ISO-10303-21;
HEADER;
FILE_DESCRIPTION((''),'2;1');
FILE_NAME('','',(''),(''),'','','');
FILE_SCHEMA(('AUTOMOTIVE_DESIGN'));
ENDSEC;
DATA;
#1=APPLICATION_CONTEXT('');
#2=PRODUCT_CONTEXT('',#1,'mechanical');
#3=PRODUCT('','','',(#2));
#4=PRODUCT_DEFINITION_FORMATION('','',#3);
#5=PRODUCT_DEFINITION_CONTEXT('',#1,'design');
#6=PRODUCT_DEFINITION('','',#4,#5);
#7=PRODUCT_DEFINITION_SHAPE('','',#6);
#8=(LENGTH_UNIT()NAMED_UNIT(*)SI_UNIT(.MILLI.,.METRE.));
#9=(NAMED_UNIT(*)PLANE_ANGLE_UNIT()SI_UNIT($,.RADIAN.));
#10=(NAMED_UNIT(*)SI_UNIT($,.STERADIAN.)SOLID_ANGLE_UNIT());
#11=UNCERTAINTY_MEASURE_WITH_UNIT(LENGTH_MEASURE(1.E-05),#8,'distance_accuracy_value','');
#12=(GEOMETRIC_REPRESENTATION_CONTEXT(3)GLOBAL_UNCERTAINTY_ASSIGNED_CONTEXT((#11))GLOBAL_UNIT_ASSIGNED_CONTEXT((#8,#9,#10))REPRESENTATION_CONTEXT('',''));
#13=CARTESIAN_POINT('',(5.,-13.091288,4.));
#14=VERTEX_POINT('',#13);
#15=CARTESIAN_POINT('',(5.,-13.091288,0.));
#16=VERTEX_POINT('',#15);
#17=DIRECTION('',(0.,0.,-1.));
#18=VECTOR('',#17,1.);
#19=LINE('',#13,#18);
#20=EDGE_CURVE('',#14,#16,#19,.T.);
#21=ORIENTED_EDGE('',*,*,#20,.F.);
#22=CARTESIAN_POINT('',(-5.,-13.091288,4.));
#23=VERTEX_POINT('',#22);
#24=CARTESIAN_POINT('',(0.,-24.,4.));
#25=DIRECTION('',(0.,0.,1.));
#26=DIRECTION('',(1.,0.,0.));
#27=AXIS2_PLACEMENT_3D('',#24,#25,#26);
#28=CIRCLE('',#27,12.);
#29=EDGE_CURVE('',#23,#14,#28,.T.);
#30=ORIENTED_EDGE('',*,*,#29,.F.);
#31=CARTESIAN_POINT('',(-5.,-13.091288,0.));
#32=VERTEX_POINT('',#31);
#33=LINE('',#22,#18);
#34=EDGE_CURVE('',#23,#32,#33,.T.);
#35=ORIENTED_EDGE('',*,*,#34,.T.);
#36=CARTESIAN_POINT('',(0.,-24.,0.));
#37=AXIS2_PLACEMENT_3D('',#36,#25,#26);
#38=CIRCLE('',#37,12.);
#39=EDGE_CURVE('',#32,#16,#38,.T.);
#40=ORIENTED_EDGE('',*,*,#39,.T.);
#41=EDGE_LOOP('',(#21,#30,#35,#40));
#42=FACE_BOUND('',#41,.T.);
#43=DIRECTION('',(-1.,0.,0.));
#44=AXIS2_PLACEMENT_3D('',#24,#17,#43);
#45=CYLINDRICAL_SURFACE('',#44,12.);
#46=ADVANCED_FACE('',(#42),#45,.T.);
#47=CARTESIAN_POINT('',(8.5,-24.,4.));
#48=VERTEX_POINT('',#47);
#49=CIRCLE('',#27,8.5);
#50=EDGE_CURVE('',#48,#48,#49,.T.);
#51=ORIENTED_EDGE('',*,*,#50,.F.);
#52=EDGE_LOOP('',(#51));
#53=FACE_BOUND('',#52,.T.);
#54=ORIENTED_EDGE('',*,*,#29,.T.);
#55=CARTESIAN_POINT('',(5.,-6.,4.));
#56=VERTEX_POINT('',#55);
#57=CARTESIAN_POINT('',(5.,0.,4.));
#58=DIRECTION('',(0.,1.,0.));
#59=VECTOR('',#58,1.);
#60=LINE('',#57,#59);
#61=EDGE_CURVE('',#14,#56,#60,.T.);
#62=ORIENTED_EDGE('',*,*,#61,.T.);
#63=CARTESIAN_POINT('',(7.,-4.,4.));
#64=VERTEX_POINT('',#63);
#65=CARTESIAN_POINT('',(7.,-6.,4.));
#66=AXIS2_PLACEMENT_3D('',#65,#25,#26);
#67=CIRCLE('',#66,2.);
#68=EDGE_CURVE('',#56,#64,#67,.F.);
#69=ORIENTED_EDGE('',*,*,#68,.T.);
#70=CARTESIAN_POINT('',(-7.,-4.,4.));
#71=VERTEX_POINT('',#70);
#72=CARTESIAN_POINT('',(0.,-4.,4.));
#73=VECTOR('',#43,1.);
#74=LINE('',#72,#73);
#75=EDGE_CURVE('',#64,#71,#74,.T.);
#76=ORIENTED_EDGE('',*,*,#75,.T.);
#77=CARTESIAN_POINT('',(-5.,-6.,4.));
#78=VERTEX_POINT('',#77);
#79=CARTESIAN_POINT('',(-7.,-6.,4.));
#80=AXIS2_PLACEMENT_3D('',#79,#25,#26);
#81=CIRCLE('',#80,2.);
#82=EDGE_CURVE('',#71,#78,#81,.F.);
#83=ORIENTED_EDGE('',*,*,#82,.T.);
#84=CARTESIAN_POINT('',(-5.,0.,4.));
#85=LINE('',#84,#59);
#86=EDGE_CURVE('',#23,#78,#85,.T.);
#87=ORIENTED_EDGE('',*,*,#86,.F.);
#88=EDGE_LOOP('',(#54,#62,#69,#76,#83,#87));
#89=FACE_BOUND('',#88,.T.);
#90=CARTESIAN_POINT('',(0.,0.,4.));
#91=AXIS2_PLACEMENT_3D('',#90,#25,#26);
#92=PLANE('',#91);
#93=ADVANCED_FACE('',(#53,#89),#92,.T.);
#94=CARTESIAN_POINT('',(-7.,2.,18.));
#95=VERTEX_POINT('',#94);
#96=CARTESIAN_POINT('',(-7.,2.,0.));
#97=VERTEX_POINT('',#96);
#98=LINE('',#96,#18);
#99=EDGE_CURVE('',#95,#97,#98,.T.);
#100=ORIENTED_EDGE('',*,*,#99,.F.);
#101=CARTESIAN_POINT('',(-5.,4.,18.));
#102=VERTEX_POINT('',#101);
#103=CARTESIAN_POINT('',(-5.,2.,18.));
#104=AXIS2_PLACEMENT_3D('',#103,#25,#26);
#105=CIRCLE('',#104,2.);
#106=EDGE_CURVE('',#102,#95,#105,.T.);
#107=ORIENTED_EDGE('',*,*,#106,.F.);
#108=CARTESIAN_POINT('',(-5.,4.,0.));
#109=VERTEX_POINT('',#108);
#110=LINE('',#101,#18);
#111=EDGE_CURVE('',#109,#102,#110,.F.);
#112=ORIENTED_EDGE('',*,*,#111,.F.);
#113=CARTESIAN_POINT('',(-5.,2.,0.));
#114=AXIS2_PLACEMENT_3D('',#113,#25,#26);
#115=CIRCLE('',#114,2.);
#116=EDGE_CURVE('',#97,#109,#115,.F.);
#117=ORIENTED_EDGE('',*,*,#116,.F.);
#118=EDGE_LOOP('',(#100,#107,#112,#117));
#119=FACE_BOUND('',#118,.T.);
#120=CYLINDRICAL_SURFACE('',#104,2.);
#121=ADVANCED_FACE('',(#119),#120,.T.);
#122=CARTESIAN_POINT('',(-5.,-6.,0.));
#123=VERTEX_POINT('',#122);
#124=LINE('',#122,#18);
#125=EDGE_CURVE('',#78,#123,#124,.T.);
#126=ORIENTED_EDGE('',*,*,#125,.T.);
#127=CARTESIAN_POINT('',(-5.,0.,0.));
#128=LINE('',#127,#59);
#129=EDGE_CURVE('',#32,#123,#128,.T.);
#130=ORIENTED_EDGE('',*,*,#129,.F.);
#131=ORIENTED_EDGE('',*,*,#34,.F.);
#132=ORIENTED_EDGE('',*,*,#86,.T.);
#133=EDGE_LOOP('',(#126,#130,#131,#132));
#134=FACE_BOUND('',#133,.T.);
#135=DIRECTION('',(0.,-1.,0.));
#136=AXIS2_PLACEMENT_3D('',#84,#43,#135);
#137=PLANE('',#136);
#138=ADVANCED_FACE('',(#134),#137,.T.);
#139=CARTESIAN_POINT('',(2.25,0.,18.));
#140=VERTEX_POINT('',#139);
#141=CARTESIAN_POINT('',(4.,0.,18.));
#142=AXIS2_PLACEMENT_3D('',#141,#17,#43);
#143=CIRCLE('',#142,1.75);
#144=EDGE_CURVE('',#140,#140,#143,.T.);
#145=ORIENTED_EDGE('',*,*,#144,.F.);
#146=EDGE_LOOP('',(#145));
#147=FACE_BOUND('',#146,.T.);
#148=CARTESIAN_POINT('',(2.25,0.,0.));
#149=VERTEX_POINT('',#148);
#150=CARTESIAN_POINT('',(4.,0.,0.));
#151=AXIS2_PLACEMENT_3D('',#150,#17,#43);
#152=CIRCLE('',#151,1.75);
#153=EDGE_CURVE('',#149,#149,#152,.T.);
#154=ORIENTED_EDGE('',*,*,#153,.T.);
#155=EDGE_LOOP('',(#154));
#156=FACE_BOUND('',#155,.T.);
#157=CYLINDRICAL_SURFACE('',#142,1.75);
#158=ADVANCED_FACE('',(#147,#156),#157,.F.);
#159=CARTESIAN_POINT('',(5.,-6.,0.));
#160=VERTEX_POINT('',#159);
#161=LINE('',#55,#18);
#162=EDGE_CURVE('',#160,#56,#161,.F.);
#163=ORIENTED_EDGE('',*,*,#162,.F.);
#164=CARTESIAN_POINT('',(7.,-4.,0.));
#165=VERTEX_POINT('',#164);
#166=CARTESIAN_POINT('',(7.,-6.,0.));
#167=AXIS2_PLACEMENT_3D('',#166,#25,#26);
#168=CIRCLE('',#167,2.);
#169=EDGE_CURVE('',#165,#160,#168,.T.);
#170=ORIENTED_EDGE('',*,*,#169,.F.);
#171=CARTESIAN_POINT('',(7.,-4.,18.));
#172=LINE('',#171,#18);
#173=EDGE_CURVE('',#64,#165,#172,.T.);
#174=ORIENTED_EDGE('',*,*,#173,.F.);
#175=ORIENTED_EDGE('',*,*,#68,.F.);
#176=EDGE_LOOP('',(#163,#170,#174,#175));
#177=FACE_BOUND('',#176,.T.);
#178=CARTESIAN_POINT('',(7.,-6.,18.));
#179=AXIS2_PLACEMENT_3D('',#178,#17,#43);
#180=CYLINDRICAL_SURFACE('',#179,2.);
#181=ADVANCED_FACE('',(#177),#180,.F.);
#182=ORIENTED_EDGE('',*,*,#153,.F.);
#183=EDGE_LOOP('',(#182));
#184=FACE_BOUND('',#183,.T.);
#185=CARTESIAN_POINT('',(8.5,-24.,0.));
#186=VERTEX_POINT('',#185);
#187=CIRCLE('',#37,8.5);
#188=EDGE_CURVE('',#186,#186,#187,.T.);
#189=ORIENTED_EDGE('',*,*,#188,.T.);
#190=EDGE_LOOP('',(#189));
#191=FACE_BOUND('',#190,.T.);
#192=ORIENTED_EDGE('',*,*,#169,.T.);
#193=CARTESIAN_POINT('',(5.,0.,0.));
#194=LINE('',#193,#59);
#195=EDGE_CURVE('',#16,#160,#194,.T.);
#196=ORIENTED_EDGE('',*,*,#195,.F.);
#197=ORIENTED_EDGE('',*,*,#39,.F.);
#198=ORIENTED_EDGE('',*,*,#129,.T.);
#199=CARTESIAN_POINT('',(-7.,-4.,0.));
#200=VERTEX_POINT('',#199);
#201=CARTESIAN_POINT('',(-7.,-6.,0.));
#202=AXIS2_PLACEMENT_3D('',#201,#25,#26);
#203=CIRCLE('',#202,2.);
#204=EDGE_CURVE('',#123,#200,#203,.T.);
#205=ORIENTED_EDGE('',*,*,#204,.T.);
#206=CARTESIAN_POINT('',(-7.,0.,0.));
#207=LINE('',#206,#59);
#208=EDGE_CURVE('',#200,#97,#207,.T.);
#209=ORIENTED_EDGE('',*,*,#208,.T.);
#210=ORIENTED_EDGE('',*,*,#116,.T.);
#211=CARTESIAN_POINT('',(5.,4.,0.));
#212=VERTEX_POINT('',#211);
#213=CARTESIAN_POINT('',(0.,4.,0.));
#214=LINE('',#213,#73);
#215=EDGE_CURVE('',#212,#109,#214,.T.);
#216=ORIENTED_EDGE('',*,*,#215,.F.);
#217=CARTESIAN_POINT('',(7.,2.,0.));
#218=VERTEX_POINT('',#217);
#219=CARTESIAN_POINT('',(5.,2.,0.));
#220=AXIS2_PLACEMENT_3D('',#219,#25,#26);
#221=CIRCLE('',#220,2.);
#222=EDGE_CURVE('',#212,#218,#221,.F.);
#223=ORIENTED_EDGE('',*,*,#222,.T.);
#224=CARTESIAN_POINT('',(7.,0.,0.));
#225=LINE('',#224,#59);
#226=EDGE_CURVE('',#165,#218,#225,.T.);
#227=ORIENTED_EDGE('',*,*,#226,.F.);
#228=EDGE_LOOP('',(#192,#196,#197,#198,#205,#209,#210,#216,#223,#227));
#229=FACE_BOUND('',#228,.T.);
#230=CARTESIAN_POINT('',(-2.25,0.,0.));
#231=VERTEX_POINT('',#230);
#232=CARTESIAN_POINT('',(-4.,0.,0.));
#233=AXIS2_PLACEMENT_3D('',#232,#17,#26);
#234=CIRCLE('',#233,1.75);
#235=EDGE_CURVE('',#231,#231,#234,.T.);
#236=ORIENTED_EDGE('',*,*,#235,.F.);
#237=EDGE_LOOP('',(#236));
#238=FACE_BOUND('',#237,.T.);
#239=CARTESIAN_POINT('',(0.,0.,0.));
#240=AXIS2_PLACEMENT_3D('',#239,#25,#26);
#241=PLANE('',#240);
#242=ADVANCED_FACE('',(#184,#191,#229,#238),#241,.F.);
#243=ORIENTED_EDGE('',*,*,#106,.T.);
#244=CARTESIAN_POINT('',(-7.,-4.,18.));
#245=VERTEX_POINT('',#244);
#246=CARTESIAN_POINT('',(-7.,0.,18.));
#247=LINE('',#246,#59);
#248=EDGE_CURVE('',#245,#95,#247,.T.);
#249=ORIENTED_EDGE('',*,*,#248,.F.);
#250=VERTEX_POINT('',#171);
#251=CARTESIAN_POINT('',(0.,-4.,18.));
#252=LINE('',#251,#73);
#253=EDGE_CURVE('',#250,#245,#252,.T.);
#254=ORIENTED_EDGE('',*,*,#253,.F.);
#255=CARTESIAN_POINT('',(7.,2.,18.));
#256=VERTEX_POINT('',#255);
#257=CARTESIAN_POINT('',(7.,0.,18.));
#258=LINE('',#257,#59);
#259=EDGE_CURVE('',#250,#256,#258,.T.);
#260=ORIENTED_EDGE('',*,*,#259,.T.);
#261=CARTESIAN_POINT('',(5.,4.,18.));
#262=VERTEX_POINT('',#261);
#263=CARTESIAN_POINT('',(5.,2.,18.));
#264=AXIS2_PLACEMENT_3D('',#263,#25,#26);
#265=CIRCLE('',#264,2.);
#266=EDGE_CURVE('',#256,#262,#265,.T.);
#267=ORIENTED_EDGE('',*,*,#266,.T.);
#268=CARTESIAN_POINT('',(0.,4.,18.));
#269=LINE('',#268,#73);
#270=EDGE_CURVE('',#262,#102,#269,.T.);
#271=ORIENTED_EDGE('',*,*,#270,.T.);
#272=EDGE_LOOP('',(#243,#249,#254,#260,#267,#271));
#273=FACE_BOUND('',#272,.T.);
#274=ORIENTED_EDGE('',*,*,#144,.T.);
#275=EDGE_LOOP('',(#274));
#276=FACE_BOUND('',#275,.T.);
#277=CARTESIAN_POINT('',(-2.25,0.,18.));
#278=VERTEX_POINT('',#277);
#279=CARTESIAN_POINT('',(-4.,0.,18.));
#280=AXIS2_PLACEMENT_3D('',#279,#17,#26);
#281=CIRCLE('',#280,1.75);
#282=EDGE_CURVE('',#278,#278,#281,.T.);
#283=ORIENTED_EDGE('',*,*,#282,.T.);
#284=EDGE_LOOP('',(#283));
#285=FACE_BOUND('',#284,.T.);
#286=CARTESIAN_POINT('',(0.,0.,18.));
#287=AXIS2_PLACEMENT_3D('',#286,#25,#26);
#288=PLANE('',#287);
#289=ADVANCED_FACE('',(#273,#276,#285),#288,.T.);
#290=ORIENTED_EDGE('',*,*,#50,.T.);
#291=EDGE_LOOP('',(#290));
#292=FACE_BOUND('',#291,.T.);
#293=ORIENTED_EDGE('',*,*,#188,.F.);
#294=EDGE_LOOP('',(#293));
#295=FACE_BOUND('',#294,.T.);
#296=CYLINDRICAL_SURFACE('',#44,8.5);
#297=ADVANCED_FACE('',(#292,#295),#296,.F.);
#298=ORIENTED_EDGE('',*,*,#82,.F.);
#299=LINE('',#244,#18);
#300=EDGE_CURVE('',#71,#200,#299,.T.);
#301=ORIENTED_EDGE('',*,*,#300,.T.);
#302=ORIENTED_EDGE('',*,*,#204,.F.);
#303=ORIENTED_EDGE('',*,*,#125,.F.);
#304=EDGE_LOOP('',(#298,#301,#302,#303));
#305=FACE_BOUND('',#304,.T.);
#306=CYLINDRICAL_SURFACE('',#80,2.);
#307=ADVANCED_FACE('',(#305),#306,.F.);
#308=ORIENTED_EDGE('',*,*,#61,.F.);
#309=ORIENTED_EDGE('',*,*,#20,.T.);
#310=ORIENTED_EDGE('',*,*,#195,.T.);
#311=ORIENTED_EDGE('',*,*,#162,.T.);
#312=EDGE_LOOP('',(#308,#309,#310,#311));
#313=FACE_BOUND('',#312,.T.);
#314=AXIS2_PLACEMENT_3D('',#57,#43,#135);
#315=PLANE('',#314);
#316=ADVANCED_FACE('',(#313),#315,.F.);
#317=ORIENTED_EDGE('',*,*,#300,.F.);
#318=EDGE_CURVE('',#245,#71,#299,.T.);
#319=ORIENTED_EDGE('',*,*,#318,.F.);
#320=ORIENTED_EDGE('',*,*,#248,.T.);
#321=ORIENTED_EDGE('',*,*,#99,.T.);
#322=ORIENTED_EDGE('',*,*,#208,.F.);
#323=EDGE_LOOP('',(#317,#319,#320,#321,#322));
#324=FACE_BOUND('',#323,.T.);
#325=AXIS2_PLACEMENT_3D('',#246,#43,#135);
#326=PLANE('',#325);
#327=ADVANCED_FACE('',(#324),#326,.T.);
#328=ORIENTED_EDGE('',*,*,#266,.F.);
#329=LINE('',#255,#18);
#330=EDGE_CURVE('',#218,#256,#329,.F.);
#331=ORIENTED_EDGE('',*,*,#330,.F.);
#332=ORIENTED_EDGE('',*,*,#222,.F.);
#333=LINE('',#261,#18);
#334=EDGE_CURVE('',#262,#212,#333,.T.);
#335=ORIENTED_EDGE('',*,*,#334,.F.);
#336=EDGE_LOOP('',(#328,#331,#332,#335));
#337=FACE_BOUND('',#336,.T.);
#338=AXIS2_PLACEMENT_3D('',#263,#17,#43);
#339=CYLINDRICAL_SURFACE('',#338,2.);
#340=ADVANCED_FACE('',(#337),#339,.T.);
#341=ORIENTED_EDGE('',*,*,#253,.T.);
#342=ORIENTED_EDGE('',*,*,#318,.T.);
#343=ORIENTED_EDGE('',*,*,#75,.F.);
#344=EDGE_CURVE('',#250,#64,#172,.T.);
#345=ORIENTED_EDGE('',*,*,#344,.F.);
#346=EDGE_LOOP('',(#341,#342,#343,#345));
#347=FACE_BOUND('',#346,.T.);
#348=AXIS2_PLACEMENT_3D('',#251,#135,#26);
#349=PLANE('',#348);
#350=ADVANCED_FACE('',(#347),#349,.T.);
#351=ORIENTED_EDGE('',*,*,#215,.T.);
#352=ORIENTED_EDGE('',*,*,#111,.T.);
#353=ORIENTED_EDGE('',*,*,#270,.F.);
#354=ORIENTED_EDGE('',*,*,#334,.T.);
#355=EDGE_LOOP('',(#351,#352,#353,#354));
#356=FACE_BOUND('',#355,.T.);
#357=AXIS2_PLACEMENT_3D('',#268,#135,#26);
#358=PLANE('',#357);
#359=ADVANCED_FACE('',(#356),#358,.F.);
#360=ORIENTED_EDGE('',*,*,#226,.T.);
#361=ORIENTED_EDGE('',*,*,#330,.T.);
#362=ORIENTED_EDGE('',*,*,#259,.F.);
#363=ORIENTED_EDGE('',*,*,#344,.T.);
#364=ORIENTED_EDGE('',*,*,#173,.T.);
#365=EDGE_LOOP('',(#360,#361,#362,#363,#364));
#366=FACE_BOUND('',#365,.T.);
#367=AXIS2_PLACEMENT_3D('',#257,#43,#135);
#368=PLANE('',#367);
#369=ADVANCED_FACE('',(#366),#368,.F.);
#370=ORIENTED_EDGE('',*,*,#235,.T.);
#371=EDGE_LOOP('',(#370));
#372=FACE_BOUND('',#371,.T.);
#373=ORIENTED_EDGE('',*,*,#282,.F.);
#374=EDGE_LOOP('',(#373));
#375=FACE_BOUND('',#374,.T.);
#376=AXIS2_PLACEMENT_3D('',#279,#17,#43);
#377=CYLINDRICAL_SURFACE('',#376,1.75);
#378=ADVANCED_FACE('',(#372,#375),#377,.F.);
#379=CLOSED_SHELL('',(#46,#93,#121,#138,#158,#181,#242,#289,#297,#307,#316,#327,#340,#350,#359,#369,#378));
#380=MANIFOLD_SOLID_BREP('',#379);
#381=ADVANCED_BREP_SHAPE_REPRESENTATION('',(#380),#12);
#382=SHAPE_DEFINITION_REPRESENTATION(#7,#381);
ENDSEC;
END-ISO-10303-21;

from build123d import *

# Parameters (mm, degrees)
SKETCH_1_W          = 14
SKETCH_1_H          = 8
EXTRUDE_1_DEPTH     = 18
SKETCH_1_3_R        = 8.5
EXTRUDE_2_DEPTH     = 4
FILLET_1_R          = 2
CUT_EXTRUDE_START   = -18
SKETCH_5_R          = 1.75
CUT_EXTRUDE_1_DEPTH = 18
FILLET_3_R          = 2


with BuildPart() as part:
    # 草图1 → 凸台-拉伸1 (new body)
    with BuildSketch(Plane.XY):
        Rectangle(SKETCH_1_W, SKETCH_1_H)
    extrude(amount=EXTRUDE_1_DEPTH)

    # 草图1<3> → 凸台-拉伸2 (add)
    with BuildSketch(Plane.XY):
        with BuildLine():
            Line((5, -13.091287885), (5, -4))
            Line((5, -4), (-5, -4))
            Line((-5, -4), (-5, -13.091287885))
            ThreePointArc((-5, -13.091287885), (0, -36), (5, -13.091287885))
        make_face()
        with Locations((0, -24)):
            Circle(SKETCH_1_3_R, mode=Mode.SUBTRACT)
    extrude(amount=EXTRUDE_2_DEPTH)

    # 圆角1
    fillet_1_edges = [part.edges().sort_by_distance(p)[0] for p in [
        (-5, -4, 2),
        (5, -4, 2),
    ]]
    fillet(fillet_1_edges, radius=FILLET_1_R - 0.0001)  # a hair under: the kernel refuses the full size

    # 草图5 → 切除-拉伸1 (cut)
    with BuildSketch(Plane(origin=(0, 0, 0), x_dir=(-1, 0, 0), z_dir=(0, 0, -1)).offset(CUT_EXTRUDE_START)):
        with Locations((-4, 0)):
            Circle(SKETCH_5_R)
        with Locations(Location((4, 0, 0), (0, 0, 180))):
            Circle(SKETCH_5_R)
    extrude(amount=CUT_EXTRUDE_1_DEPTH, mode=Mode.SUBTRACT)

    # 圆角3
    fillet_3_edges = [part.edges().sort_by_distance(p)[0] for p in [
        (-7, 4, 9),
        (7, 4, 9),
    ]]
    fillet(fillet_3_edges, radius=FILLET_3_R)


solid = part.part
